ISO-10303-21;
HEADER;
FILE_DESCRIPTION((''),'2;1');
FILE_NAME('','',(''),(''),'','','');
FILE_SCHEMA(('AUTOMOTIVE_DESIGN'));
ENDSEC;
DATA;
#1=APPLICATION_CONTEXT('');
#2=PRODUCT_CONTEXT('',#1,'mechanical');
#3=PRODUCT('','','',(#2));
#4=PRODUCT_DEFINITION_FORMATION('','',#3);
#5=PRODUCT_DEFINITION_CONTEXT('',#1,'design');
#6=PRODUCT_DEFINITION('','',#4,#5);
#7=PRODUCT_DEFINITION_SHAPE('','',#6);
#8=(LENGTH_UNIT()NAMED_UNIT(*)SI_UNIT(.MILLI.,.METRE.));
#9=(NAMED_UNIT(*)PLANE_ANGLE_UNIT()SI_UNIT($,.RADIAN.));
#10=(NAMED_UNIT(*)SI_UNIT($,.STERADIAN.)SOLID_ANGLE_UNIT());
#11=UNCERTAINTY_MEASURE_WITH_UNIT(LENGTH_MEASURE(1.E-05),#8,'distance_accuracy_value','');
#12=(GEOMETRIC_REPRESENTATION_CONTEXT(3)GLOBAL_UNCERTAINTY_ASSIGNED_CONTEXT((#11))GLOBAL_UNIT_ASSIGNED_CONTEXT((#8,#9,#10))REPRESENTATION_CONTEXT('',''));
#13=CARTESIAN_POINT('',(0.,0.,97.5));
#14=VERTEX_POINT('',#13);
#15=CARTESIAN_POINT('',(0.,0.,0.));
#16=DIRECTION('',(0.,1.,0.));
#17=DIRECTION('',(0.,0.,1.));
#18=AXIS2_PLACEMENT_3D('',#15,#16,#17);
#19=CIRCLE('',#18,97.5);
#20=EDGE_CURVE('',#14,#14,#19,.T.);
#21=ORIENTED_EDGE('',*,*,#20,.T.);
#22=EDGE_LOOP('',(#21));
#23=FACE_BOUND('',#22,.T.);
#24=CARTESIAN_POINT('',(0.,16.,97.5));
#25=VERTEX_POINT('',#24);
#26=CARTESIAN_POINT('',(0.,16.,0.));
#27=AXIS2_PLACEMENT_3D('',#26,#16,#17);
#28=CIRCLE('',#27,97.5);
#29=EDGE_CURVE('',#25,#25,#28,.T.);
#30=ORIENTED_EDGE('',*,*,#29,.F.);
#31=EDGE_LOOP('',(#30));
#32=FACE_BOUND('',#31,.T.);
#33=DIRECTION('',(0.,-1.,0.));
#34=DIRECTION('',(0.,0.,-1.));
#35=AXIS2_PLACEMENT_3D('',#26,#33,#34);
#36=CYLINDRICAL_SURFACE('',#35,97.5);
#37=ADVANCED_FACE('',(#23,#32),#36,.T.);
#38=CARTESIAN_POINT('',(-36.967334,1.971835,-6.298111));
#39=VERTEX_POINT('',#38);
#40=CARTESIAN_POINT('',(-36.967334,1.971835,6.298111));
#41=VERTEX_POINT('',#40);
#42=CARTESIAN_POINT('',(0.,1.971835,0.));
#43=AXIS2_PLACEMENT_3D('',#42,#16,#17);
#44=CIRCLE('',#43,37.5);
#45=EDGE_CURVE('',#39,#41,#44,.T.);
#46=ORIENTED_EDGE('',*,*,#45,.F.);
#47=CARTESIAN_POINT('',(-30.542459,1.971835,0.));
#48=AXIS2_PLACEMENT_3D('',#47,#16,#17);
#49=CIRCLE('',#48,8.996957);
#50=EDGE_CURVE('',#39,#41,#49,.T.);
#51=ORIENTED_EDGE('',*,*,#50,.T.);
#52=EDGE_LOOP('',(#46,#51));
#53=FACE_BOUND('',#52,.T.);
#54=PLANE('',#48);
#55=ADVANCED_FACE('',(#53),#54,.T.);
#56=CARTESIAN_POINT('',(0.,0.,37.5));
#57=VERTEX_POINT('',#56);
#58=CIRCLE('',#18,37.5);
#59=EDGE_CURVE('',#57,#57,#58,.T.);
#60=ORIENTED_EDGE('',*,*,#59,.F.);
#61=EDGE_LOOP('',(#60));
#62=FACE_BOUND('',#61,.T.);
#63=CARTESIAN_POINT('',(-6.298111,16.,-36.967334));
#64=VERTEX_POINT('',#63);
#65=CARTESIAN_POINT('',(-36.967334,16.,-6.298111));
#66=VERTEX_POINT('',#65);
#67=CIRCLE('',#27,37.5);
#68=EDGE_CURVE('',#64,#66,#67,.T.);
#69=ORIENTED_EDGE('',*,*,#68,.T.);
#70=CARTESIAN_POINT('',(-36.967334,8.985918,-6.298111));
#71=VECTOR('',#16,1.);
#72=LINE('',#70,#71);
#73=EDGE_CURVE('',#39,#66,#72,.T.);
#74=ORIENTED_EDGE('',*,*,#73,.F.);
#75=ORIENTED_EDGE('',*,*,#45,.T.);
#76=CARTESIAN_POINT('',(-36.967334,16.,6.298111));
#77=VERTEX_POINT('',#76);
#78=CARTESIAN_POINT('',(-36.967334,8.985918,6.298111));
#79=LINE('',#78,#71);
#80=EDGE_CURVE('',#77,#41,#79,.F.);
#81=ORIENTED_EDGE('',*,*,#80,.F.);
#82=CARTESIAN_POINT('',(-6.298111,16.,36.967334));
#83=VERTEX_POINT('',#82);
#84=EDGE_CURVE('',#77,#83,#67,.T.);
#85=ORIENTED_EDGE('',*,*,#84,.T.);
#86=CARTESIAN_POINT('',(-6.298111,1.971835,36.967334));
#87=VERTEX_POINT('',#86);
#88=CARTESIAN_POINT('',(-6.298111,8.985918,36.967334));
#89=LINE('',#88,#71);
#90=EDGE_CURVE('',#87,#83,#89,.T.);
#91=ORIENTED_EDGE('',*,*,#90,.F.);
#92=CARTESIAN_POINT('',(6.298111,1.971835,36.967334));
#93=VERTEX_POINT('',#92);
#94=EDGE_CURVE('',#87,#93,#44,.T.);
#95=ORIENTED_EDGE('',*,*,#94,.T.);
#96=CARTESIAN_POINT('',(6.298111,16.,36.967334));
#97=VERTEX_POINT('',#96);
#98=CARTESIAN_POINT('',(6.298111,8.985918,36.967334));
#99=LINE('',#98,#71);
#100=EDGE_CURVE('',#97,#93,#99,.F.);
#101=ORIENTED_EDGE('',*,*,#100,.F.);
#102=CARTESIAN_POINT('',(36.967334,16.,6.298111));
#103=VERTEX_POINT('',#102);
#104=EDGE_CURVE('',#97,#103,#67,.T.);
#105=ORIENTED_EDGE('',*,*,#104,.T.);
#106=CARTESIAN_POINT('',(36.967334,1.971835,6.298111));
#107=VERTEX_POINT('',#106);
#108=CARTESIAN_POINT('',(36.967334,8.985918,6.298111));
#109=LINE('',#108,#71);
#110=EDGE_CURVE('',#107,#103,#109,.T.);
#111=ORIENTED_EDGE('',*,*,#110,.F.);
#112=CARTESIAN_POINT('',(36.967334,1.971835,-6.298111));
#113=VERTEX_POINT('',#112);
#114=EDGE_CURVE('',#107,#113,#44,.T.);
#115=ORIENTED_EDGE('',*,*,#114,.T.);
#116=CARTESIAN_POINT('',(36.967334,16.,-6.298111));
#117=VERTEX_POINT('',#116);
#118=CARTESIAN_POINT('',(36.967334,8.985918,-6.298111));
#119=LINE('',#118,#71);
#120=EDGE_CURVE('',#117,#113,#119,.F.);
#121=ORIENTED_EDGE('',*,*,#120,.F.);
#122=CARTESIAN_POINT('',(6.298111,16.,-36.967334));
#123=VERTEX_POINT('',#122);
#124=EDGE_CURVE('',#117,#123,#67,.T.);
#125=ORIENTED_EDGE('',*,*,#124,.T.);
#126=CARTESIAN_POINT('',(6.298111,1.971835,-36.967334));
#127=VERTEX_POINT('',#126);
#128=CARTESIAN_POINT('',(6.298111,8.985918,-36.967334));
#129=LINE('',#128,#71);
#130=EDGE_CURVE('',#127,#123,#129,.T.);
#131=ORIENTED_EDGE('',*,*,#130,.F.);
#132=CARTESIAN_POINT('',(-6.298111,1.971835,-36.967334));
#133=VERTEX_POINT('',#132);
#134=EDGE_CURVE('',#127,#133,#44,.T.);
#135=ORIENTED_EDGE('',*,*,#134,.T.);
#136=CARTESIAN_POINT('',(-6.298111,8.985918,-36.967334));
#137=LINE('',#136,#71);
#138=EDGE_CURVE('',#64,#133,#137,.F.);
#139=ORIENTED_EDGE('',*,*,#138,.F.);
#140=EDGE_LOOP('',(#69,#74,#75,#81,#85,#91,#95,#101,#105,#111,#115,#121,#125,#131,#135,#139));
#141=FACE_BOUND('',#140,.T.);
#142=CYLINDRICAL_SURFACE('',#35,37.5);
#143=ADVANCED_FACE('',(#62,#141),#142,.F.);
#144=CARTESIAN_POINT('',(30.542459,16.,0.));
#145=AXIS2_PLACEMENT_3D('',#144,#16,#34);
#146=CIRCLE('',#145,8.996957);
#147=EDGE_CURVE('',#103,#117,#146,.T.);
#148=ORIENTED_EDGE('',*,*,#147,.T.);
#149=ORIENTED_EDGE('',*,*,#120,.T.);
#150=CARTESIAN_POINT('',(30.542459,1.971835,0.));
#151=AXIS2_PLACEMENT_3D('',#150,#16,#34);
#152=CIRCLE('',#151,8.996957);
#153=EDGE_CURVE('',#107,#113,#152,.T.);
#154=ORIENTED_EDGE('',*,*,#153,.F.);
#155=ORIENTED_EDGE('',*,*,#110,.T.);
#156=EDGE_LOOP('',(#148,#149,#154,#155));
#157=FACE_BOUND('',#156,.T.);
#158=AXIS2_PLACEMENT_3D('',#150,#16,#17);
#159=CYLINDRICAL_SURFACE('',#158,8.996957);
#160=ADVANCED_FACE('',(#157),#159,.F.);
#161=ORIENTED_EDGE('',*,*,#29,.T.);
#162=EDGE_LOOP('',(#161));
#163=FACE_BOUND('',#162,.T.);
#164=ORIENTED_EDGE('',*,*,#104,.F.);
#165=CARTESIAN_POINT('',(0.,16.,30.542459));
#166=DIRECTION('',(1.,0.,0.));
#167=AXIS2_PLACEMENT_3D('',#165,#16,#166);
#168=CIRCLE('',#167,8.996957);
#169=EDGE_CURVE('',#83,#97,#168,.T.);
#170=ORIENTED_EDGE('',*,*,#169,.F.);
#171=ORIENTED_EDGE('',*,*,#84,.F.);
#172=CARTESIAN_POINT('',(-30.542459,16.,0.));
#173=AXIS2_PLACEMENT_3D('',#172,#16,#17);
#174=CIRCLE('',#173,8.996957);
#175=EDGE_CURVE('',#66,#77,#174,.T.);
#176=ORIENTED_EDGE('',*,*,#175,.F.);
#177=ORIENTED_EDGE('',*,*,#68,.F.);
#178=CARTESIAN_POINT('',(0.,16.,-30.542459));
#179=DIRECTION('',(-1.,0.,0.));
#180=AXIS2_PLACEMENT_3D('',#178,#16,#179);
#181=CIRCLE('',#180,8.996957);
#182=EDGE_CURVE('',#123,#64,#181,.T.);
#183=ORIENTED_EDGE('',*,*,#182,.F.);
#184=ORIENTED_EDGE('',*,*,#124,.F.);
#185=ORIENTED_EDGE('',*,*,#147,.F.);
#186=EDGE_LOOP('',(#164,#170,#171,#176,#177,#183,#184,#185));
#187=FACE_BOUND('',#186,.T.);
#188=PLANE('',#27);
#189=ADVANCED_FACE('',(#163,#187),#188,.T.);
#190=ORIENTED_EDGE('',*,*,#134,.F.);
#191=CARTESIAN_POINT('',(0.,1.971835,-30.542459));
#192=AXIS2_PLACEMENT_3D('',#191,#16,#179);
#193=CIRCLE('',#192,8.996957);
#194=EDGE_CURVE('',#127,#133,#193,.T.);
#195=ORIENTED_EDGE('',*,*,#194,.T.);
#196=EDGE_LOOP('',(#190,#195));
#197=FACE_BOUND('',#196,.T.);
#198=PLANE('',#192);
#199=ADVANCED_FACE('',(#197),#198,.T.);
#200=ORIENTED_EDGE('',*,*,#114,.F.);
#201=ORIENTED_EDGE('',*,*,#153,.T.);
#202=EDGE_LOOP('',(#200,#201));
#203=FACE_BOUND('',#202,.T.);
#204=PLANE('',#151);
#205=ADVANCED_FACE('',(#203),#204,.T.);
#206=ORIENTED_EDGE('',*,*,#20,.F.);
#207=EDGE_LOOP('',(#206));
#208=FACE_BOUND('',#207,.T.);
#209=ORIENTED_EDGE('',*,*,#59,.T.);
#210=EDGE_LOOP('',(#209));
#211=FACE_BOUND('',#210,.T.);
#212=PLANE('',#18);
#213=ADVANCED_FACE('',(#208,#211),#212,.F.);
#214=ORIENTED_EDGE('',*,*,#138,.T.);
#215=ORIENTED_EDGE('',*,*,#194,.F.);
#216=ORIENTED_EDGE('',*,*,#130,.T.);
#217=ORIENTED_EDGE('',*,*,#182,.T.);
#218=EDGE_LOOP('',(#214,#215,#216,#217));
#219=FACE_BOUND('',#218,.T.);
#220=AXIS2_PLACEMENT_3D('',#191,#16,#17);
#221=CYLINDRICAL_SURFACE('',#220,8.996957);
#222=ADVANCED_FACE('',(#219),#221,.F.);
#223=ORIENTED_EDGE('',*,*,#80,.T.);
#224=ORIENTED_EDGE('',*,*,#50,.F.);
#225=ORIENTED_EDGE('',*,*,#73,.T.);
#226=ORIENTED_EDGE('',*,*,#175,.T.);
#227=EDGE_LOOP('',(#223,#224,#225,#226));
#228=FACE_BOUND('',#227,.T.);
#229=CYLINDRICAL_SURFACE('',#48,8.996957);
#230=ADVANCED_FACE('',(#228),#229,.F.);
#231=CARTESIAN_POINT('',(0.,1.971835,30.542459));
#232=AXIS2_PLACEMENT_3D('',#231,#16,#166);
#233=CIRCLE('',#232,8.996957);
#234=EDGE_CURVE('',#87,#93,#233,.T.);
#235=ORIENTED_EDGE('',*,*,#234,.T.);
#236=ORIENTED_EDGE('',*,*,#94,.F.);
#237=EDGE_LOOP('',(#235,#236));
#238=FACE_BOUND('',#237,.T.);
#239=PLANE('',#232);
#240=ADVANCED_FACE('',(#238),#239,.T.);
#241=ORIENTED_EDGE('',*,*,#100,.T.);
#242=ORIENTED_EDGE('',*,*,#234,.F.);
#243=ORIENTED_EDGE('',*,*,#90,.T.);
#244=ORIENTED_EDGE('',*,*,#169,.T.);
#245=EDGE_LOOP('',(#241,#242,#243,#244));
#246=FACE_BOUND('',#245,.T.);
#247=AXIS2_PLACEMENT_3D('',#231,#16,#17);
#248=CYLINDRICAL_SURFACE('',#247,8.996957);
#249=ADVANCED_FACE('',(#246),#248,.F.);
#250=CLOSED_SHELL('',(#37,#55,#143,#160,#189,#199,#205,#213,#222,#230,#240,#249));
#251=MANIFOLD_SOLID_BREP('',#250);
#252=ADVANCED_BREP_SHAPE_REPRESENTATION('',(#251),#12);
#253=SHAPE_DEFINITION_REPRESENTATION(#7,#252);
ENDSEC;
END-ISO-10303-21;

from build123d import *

# Parameters (mm, degrees)
SKETCH1_R           = 97.5
BOSS_EXTRUDE1_DEPTH = 16
SKETCH2_R           = 37.5
CUT_EXTRUDE1_DEPTH  = 139.811022617
SKETCH3_R           = 8.996956519
CUT_EXTRUDE2_DEPTH  = 14.02816458
CIRPATTERN1_COUNT   = 4


with BuildPart() as part:
    # Sketch1 → Boss-Extrude1 (new body)
    with BuildSketch(Plane(origin=(0, 0, 0), x_dir=(1, 0, 0), z_dir=(0, 1, 0))):
        Circle(SKETCH1_R)
    extrude(amount=BOSS_EXTRUDE1_DEPTH)

    # Sketch2 → Cut-Extrude1 (cut, through all)
    with BuildSketch(Plane(origin=(0, 0, 0), x_dir=(1, 0, 0), z_dir=(0, 1, 0))):
        Circle(SKETCH2_R)
    extrude(amount=CUT_EXTRUDE1_DEPTH, mode=Mode.SUBTRACT)

    # Sketch3 → Cut-Extrude2 (cut)
    with BuildSketch(Plane(origin=(0, 16, 0), x_dir=(1, 0, 0), z_dir=(0, 1, 0))):
        with Locations((-30.542458764, 0)):
            Circle(SKETCH3_R)
    cut_extrude2 = extrude(amount=-CUT_EXTRUDE2_DEPTH, mode=Mode.SUBTRACT)

    # CirPattern1: Cut-Extrude2 ×4 about axis
    cirpattern1_axis = Axis((0, 0, 0), (0, 1, 0))
    for i in range(1, CIRPATTERN1_COUNT):
        add(cut_extrude2.rotate(cirpattern1_axis, i * 360 / CIRPATTERN1_COUNT), mode=Mode.SUBTRACT)


solid = part.part
